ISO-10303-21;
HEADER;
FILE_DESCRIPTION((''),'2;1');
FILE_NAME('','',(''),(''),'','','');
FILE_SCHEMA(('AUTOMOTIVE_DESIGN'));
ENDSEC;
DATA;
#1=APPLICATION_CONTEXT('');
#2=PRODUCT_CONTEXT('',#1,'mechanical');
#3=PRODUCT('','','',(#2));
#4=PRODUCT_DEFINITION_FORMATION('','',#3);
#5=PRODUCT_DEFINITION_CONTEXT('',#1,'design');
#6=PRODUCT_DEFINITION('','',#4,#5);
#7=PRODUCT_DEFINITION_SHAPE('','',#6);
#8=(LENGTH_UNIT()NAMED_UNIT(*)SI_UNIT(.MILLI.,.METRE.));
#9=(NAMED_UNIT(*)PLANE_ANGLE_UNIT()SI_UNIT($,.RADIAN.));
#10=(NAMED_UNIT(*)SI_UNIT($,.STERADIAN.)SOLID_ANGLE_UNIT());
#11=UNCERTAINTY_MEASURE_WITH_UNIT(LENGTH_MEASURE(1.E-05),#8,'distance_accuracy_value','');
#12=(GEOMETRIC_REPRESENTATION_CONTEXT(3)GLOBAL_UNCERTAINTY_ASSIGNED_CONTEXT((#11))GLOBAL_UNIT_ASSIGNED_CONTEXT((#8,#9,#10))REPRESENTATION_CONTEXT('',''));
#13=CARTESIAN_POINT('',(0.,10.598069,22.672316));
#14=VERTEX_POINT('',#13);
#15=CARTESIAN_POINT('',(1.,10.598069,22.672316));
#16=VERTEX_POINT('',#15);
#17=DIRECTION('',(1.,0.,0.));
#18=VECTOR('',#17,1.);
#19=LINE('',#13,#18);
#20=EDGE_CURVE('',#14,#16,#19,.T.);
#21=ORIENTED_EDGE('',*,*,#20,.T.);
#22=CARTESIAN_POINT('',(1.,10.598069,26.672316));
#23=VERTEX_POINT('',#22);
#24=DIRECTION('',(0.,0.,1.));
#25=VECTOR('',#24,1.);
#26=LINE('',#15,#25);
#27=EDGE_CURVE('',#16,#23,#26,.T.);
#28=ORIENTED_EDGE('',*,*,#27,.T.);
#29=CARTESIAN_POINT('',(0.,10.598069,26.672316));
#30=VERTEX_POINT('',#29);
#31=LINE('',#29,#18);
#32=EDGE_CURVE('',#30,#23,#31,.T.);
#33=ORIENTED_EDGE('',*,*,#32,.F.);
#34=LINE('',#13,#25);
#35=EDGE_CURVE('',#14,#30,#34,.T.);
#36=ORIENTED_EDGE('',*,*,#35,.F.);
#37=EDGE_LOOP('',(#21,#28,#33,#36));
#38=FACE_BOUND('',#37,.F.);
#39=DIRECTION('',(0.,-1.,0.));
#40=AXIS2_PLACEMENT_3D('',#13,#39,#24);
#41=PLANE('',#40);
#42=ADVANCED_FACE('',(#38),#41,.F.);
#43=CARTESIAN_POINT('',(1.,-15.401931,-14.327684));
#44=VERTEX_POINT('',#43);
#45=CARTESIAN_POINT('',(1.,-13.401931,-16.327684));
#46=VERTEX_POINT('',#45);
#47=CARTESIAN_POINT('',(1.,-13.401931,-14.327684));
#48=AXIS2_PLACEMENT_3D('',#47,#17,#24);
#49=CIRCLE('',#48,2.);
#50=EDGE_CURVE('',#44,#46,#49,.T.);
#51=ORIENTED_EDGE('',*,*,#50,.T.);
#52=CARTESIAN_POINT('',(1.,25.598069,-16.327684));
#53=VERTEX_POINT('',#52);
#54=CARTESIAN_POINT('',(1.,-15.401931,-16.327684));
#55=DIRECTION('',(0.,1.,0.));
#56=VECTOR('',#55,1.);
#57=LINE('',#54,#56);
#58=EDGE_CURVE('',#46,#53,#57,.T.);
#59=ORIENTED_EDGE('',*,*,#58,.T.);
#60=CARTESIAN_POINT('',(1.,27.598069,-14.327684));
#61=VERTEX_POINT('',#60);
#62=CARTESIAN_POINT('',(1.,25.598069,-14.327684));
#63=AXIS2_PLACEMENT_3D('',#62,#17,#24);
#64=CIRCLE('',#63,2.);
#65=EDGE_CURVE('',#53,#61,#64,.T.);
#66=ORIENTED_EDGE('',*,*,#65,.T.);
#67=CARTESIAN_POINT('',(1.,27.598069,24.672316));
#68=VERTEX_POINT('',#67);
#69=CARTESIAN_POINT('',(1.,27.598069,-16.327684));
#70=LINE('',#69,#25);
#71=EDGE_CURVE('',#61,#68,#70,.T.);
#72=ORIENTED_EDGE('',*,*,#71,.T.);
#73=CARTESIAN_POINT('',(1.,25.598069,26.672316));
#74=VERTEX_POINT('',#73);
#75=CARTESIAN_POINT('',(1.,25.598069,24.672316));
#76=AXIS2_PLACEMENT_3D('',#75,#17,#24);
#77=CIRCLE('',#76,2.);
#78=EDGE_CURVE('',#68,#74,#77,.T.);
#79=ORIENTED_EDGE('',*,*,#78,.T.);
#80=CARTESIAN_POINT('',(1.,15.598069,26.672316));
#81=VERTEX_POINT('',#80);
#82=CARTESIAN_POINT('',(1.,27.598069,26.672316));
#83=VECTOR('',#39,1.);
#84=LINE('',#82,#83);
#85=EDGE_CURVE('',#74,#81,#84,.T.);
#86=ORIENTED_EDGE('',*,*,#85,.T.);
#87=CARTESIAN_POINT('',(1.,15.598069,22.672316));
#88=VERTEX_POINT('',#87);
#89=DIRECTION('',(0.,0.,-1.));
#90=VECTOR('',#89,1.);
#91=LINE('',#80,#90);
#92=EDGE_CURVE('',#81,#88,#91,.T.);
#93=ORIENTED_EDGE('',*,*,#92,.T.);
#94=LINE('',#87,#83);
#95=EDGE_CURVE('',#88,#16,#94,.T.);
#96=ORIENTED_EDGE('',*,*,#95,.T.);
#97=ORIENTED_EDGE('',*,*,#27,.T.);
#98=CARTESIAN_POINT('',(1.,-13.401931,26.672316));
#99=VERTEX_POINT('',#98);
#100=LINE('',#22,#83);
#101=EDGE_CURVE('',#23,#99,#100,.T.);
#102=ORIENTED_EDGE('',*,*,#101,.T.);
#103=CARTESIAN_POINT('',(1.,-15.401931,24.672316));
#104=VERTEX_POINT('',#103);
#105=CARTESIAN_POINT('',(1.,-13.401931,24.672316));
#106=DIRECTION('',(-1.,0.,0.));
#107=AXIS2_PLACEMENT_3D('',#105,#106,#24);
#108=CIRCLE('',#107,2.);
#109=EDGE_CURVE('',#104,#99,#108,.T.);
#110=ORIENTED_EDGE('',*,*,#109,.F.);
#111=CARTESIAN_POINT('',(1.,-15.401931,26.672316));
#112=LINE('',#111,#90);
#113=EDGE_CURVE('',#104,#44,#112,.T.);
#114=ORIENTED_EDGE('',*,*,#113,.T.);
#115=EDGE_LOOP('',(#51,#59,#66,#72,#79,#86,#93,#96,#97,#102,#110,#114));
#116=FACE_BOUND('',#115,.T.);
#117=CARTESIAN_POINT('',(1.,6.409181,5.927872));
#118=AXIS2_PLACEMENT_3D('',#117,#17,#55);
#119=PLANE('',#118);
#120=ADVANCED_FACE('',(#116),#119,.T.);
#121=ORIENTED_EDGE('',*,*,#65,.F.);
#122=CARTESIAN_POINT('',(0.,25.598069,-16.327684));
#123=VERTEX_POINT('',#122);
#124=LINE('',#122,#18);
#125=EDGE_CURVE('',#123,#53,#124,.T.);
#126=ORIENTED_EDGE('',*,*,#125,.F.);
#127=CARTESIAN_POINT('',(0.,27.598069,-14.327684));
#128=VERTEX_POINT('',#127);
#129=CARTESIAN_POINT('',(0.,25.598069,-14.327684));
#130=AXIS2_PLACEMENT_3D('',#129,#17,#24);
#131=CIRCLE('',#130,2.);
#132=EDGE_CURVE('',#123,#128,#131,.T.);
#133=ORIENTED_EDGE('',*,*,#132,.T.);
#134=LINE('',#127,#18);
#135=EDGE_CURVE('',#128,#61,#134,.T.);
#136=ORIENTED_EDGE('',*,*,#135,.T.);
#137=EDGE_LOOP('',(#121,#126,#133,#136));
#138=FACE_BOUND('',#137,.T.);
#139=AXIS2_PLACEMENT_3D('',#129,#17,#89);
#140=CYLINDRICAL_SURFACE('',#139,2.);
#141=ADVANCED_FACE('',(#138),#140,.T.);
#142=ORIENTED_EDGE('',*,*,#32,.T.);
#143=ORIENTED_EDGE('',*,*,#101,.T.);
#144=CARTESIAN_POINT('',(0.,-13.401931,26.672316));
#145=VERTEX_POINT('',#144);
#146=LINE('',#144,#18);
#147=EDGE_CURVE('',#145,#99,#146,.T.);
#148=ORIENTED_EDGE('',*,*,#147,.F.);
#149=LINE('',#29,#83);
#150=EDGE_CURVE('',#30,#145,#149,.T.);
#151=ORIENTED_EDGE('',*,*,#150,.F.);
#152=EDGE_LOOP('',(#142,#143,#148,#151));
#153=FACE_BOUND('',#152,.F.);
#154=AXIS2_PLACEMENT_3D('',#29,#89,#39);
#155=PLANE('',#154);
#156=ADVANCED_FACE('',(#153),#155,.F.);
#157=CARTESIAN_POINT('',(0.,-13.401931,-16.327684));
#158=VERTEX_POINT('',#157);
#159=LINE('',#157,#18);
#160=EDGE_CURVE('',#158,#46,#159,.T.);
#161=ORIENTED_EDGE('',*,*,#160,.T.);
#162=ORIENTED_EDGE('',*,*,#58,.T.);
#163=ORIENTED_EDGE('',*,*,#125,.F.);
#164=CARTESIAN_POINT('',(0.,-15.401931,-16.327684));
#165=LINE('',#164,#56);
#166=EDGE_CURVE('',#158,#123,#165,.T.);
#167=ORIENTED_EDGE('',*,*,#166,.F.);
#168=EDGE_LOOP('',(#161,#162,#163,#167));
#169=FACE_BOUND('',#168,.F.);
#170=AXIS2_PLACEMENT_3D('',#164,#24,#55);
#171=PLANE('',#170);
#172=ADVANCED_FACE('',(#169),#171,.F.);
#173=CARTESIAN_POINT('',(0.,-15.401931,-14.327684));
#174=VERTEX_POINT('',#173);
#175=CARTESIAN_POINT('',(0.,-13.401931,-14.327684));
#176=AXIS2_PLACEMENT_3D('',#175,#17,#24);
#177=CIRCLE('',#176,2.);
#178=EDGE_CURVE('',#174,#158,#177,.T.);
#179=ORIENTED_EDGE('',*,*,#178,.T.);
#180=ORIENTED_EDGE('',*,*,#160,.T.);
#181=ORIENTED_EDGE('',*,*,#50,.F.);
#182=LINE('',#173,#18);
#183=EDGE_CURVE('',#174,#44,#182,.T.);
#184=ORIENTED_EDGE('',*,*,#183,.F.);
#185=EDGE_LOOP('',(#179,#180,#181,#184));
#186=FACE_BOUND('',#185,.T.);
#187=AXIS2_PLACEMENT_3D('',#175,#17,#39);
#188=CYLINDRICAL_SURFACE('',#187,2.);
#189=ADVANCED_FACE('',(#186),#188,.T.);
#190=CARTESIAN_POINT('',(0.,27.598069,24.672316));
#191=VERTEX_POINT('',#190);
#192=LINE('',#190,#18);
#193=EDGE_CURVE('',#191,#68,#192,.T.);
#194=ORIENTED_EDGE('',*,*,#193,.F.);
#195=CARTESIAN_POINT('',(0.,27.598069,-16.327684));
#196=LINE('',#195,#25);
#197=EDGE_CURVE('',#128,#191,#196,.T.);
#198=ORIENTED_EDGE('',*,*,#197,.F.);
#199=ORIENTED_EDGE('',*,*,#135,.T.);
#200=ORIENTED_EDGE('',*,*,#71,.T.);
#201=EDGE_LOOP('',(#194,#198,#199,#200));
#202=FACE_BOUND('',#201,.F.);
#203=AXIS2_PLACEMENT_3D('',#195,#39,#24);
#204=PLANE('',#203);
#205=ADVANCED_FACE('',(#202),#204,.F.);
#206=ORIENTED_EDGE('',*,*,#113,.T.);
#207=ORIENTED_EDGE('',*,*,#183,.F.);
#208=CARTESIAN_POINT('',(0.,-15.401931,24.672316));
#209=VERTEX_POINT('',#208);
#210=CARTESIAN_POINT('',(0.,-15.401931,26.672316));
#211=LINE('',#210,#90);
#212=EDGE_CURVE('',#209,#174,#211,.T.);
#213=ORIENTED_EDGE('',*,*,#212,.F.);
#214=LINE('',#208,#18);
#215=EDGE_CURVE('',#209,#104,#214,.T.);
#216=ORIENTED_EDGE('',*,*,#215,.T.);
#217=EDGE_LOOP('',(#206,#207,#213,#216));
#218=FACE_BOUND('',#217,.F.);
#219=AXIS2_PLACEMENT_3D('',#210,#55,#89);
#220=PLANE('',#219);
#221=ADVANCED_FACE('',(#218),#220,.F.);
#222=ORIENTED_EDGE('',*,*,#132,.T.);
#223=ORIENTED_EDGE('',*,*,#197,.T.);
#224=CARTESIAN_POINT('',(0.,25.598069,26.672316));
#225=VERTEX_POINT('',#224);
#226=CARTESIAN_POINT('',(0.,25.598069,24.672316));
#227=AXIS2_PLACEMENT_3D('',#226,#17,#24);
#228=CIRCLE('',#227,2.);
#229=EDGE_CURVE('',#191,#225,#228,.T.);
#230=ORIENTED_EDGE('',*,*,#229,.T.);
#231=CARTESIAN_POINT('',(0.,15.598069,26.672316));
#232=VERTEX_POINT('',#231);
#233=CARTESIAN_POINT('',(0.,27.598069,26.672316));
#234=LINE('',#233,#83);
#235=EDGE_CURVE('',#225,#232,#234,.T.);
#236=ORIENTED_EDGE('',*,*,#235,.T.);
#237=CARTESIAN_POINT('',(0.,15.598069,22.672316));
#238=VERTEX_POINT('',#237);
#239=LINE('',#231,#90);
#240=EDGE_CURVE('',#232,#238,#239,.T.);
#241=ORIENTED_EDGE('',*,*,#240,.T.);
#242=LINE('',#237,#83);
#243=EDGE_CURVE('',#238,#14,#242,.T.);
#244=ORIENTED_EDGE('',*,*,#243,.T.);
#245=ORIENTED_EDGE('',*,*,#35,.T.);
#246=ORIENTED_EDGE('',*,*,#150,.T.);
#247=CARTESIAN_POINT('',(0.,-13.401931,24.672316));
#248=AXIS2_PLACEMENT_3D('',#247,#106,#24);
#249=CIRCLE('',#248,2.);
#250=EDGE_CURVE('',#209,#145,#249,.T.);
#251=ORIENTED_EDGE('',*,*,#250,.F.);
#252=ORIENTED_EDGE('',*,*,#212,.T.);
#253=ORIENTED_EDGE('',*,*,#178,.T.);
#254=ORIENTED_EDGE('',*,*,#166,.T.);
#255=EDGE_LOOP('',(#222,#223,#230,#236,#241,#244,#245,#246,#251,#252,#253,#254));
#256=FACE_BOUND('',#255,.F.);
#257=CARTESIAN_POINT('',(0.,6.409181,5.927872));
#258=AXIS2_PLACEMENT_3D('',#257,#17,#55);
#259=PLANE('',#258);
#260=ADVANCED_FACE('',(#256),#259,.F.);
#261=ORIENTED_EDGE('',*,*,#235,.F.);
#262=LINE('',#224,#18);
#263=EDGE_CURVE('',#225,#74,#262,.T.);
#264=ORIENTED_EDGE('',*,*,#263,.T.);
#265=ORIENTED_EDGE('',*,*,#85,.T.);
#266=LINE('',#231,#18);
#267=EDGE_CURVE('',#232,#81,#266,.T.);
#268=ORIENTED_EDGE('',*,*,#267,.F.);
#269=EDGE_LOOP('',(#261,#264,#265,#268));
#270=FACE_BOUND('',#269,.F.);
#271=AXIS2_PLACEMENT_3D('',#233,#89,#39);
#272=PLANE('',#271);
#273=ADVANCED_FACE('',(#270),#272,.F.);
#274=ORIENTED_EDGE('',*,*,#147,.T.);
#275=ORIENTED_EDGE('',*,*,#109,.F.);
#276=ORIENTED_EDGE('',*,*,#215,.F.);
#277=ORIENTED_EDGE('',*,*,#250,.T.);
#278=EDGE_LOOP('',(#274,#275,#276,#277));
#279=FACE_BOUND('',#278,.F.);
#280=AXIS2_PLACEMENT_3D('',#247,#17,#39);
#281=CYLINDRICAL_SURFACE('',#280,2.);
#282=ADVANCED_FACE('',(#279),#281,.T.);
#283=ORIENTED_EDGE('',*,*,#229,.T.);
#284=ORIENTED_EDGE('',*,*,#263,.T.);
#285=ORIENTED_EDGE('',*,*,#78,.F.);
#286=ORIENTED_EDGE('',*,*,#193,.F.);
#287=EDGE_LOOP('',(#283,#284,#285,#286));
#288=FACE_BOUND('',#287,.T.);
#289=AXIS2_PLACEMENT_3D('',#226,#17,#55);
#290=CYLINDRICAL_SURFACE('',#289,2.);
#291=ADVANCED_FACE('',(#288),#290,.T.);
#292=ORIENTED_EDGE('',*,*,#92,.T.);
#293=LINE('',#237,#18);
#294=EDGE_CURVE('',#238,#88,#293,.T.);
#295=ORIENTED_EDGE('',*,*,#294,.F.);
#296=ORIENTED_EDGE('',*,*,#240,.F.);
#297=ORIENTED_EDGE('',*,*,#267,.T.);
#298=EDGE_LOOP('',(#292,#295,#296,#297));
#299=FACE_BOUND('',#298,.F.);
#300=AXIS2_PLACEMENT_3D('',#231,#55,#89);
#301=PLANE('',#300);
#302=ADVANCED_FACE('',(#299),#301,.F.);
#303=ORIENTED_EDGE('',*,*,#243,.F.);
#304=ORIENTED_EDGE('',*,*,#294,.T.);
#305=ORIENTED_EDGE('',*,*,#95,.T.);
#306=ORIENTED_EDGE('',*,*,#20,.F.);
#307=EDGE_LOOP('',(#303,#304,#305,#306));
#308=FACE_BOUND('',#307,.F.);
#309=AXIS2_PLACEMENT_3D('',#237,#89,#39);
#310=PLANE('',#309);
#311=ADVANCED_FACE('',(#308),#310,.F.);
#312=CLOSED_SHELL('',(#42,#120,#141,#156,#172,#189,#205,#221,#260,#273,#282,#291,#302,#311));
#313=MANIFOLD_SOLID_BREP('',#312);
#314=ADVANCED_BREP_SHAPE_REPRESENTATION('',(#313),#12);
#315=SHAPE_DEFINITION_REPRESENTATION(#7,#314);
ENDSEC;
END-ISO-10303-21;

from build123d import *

# Parameters (mm, degrees)
F1_DEPTH = 1
F2_R     = 2


with BuildPart() as f1:
    # F0 (on Right) → F1 (new body)
    with BuildSketch(Plane.YZ):
        Polygon((-15.4019305557, 26.6723162987), (-15.4019305557, -16.3276837013), (27.5980694443, -16.3276837013), (27.5980694443, 26.6723162987), (15.5980694443, 26.6723162987), (15.5980694443, 22.6723162987), (10.5980694443, 22.6723162987), (10.5980694443, 26.6723162987), align=None)
    extrude(amount=F1_DEPTH)

    # F2
    f2_edges = [f1.edges().sort_by_distance(p)[0] for p in [
        (0.5, -15.401931, 26.672316),
        (0.5, -15.401931, -16.327684),
        (0.5, 27.598069, -16.327684),
        (0.5, 27.598069, 26.672316),
    ]]
    fillet(f2_edges, radius=F2_R)


solid = f1.part
